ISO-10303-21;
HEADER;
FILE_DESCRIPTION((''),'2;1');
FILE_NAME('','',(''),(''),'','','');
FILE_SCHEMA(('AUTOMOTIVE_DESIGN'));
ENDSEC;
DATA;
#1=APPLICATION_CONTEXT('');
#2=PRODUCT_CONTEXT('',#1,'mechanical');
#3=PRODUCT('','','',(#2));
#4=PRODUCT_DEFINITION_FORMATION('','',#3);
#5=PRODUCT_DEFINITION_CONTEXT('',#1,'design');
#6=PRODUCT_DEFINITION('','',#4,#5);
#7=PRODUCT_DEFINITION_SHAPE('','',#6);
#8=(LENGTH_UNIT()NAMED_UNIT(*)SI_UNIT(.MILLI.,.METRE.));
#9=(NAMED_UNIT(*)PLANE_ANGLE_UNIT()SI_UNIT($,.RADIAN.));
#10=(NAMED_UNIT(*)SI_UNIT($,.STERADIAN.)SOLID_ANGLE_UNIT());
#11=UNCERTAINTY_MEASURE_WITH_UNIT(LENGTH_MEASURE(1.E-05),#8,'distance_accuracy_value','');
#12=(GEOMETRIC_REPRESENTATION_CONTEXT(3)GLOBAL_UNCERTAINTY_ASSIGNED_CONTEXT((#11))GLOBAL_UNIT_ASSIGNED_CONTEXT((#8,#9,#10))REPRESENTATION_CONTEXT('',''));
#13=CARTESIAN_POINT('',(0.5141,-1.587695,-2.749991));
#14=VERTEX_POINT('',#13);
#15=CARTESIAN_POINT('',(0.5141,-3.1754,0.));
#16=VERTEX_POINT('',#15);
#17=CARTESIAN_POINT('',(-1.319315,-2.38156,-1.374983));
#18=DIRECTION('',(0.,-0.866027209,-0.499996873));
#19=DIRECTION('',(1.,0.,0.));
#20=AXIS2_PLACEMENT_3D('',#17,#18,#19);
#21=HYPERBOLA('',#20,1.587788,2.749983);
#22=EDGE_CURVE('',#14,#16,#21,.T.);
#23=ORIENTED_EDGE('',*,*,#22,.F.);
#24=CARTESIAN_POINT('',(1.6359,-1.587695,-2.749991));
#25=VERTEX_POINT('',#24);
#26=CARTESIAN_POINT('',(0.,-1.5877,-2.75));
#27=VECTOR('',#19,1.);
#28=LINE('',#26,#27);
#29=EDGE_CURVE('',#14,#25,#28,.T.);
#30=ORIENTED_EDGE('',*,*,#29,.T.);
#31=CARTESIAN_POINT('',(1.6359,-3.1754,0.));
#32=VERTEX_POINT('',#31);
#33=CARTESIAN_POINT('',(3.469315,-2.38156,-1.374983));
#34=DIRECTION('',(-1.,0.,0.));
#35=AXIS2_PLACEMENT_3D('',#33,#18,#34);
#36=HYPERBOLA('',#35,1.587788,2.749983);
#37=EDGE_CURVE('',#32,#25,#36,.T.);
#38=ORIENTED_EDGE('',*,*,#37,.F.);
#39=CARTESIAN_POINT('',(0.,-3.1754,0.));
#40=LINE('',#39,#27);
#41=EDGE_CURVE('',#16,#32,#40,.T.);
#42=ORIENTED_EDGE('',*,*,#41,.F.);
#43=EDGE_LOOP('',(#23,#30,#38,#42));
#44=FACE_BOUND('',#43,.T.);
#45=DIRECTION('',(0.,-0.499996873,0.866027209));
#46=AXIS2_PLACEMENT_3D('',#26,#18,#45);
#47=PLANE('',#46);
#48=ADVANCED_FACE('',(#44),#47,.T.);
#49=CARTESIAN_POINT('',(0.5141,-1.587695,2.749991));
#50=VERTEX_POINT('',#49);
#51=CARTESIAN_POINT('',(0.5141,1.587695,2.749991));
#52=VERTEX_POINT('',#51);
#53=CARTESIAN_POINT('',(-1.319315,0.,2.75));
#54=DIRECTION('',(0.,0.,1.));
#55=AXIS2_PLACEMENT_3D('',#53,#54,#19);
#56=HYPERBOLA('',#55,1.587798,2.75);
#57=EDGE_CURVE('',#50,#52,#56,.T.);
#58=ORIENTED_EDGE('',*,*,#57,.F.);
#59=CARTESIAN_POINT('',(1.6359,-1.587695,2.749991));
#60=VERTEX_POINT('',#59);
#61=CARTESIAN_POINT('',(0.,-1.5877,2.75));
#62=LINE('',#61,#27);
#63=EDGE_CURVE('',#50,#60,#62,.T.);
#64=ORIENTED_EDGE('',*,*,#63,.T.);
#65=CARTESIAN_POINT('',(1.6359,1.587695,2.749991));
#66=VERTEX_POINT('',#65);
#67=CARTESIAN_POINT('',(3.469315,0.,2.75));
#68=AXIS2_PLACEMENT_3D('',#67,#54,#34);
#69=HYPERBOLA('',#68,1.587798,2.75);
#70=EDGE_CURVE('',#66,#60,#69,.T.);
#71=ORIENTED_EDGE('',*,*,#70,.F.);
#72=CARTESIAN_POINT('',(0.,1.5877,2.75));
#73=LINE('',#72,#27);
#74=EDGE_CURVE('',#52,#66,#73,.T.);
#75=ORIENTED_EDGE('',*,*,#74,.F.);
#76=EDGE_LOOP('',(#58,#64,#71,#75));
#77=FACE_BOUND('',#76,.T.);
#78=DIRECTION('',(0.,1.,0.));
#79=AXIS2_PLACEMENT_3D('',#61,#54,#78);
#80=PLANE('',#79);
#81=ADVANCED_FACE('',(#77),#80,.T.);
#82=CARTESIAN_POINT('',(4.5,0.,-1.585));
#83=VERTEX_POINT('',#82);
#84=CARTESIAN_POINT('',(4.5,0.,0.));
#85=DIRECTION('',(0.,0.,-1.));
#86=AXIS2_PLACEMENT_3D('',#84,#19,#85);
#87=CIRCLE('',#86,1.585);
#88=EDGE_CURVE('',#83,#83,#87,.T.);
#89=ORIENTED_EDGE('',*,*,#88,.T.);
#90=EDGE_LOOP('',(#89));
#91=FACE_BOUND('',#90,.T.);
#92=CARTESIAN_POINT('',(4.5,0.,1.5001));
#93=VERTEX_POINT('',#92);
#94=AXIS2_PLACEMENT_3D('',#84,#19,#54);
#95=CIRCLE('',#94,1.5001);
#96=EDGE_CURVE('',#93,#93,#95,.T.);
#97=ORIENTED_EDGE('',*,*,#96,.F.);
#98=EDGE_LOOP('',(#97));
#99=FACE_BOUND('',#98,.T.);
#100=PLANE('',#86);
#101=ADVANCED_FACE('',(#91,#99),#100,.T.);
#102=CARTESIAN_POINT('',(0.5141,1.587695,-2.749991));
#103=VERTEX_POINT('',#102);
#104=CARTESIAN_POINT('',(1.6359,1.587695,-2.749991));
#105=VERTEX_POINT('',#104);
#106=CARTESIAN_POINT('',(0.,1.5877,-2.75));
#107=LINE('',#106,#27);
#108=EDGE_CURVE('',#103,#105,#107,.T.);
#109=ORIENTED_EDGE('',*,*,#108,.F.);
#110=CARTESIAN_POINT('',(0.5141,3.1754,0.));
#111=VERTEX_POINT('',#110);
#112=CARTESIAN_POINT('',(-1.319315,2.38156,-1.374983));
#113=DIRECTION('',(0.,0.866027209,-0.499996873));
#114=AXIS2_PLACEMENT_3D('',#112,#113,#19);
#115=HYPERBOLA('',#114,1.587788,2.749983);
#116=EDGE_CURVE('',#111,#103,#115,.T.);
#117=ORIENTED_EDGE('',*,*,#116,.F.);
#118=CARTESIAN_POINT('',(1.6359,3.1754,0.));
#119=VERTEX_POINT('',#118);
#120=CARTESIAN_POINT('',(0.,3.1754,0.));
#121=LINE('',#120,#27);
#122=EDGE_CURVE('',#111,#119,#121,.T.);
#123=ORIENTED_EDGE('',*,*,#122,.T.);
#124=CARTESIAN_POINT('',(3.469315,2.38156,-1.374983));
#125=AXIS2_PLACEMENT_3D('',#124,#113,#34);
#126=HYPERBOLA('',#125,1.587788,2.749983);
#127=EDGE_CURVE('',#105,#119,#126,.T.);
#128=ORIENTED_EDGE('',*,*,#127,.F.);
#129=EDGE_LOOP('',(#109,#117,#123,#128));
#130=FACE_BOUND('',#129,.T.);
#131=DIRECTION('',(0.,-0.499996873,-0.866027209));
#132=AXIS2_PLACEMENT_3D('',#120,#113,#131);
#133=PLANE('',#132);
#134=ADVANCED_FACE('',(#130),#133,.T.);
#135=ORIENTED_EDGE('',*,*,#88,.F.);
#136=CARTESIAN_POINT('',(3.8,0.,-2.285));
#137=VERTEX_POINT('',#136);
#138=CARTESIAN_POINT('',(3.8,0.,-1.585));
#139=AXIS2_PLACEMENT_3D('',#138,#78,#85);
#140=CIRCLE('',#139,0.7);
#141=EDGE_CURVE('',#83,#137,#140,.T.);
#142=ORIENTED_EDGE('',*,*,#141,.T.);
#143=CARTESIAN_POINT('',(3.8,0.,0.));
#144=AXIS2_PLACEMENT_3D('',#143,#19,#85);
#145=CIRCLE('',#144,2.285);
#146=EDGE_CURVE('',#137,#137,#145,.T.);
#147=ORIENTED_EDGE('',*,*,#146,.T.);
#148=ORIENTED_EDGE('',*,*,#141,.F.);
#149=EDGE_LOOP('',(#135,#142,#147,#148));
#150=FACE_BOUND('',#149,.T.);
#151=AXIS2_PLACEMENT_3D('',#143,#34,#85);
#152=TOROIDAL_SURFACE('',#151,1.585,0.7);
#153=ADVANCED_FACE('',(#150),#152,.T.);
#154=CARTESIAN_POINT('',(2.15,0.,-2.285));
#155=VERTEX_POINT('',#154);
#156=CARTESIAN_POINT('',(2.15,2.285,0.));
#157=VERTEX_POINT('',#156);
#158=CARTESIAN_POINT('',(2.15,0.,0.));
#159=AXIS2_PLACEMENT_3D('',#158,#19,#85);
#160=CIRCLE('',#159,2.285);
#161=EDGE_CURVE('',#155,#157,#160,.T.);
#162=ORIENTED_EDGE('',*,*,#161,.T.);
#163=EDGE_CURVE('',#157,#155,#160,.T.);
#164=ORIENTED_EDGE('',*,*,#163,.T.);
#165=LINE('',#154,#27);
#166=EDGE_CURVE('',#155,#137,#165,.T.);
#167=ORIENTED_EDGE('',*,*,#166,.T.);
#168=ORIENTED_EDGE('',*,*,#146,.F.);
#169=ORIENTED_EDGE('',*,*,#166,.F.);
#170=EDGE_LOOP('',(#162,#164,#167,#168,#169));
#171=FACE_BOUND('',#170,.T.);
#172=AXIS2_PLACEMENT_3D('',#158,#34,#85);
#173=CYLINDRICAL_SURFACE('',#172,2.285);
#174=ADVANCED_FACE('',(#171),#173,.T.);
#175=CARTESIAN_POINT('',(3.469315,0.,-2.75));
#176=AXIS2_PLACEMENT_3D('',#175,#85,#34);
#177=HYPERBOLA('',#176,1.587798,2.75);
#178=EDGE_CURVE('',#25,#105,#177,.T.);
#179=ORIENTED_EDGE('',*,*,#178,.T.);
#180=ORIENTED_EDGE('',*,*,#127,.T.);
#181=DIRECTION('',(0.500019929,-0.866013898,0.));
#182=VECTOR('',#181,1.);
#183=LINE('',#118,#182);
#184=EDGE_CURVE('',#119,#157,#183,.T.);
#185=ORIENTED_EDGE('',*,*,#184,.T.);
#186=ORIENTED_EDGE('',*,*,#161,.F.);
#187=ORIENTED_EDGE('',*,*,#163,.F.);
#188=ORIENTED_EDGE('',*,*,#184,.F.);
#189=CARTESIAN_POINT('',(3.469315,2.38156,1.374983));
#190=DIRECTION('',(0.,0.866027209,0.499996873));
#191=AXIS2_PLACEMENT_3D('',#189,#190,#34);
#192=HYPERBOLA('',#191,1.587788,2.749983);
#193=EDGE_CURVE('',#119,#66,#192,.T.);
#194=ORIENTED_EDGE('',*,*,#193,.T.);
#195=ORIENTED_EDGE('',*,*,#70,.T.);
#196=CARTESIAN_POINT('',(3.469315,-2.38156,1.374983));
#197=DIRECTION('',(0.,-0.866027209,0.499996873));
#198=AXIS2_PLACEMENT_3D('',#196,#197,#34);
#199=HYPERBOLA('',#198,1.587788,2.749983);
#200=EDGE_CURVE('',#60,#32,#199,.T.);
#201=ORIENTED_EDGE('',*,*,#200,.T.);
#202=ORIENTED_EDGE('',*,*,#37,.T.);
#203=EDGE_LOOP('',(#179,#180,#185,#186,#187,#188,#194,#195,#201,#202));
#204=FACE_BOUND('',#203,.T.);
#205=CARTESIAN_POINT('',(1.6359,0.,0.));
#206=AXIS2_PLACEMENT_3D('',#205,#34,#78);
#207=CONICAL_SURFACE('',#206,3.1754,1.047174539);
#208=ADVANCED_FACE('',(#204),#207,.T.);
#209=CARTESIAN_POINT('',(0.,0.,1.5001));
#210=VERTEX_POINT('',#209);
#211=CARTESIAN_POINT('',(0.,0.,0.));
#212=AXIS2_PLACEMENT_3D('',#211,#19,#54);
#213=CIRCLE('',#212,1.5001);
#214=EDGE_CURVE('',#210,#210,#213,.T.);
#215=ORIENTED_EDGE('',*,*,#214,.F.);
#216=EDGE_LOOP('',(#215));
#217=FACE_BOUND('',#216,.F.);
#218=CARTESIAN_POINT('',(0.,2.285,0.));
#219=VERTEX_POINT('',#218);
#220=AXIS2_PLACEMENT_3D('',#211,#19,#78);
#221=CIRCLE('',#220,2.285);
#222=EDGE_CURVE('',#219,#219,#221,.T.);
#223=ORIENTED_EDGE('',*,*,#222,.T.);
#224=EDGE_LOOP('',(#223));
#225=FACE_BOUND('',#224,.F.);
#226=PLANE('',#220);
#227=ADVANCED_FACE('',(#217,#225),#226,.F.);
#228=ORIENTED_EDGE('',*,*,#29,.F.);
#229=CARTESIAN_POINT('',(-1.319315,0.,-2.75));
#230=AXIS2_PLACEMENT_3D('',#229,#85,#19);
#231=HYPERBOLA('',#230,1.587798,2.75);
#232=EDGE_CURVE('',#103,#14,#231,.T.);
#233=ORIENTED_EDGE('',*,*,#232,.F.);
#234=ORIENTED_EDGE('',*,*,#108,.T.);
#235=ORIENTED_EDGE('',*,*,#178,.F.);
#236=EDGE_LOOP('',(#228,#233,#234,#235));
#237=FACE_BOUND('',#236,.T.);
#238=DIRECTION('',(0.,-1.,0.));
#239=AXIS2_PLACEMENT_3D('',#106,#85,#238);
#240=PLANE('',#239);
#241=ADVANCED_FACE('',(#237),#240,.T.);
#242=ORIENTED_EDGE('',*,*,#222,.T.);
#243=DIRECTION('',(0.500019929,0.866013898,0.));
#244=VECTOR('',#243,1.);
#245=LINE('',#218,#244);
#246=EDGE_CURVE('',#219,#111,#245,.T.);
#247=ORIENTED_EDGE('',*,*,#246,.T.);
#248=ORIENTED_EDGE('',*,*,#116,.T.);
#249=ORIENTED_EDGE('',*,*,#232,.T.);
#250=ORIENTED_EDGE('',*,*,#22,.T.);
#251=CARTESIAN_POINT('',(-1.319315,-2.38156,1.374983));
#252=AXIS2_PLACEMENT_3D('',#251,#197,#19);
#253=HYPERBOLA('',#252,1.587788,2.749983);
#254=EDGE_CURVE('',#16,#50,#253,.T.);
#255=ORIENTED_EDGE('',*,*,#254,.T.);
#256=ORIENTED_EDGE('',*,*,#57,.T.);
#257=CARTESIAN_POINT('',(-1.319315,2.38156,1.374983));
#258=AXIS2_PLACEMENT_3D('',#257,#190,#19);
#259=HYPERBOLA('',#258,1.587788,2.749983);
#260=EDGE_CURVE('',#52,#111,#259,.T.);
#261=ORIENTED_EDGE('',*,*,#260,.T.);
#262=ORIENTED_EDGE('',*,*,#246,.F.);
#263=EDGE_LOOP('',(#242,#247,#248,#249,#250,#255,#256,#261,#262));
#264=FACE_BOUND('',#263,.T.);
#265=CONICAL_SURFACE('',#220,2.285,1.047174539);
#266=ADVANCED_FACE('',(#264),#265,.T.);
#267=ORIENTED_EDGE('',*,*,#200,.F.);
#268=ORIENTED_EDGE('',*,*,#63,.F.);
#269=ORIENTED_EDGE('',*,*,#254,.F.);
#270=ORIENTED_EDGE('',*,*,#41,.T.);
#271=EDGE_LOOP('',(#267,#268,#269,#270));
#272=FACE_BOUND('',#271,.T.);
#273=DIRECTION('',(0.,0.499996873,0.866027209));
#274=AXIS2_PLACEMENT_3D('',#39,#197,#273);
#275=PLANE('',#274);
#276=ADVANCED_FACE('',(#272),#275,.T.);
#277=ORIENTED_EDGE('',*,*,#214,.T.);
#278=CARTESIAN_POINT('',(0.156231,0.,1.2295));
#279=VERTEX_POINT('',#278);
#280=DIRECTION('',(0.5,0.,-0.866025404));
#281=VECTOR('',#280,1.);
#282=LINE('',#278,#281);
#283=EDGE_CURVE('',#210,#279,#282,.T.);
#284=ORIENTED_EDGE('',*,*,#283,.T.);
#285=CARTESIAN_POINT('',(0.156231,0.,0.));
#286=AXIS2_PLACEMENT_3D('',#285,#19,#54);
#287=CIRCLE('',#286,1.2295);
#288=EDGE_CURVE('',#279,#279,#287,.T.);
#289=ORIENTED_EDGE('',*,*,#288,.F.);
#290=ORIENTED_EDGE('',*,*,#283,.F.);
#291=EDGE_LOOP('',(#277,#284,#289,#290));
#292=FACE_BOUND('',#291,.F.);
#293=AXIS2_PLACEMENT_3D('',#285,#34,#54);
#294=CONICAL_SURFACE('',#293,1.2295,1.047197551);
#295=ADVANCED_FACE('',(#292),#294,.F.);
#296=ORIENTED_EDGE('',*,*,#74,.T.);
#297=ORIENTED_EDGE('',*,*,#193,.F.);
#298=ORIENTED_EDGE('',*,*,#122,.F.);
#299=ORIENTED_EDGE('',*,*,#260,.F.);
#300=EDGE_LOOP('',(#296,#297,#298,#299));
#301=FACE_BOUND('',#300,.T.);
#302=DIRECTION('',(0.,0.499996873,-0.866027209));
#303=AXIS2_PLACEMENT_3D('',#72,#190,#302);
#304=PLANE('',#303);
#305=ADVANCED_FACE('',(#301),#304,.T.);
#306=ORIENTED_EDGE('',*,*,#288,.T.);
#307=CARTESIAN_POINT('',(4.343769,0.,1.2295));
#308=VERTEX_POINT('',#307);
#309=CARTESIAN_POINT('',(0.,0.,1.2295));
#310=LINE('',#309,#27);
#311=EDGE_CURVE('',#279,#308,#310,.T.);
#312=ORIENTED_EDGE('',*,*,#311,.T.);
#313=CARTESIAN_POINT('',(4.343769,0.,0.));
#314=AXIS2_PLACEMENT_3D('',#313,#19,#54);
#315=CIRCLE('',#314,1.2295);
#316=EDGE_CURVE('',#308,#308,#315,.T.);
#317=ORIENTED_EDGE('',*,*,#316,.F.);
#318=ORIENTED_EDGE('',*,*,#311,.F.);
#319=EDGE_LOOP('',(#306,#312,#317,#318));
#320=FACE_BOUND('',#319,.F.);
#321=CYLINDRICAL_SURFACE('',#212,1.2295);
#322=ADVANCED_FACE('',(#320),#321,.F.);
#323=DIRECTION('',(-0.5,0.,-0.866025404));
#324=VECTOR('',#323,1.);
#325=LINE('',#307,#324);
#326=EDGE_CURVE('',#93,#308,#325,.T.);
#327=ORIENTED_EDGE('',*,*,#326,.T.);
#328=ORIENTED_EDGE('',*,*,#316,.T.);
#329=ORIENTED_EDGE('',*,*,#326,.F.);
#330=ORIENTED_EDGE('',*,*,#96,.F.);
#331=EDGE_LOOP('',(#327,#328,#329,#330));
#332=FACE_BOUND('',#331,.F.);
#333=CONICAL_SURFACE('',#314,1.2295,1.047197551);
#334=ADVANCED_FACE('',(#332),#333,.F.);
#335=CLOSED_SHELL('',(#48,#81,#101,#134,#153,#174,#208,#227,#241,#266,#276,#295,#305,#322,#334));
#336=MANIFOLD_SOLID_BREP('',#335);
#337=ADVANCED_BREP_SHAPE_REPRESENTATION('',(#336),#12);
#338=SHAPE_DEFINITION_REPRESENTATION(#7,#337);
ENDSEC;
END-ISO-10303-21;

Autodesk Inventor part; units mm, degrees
ref_plane "YZ Plane" through (0, 0, 0) normal (1, 0, 0) x (0, 1, 0)
ref_plane "XZ Plane" through (0, 0, 0) normal (0, 1, 0) x (-1, 0, 0)
sketch "Sketch1" plane through (0, 0, 0) normal (1, 0, 0) x (0, 1, 0)
  line L0 (1.5877, -2.75) -> (-1.5877, -2.75)
  line L1 (-1.5877, -2.75) -> (-3.1754, 0)
  line L2 (-3.1754, 0) -> (-1.5877, 2.75)
  line L3 (-1.5877, 2.75) -> (1.5877, 2.75)
  line L4 (1.5877, 2.75) -> (3.1754, 0)
  line L5 (3.1754, 0) -> (1.5877, -2.75)
  point P0 (0, 0)
  point P1 (0, 0)
  dimension "d0" = 6.3509
extrude "Body" add sketch "Sketch1" along normal blind 2.15
sketch "Sketch2" plane through (2.15, 0, 0) normal (1, 0, 0) x (0, 0, -1)
  circle A0 centre (0, 0) radius 2.285
  dimension "d7" = 4.57
extrude "Ring" add sketch "Sketch2" along normal blind 2.35
sketch "Sketch3" plane through (0, 0, 0) normal (0, 0, 1) x (1, 0, 0)
  line L0 (0, 1.5877) -> (0, 3.1754) projected
  line L1 (0, 3.1754) -> (2.15, 3.1754) projected
  line L2 (2.15, 1.5877) -> (2.15, 3.1754) projected
  line L3 (-0.43, 0) -> (2.58, 0) projected
  line L4 (0, 2.285) -> (0.5141, 3.1754)
  line L5 (1.6359, 3.1754) -> (2.15, 2.285)
  dimension "d3" = 30
  dimension "d4" = 30
  dimension "d5" = 4.57
  dimension "d6" = 4.57
revolve "Chamfer1" cut sketch "Sketch3" angle 360 about axis through (-10, 0, 0) along (1, 0, 0)
sketch "Sketch4" plane through (0, 0, 0) normal (-1, 0, 0) x (0, 0, 1)
  line L0 (0, -4.4456) -> (0, 4.4456) projected
  line L1 (-3.85, 0) -> (3.85, 0) projected
  point P0 (0, 0)
hole "Thread" at (0, 0, 0) direction (1, 0, 0) diameter 2.459 end through all thread size "M3x0.5" designation "M3" class "6H" standard "ISO Metric profile"
chamfer "Chamfer2" distance 0.2706 angle 30 1 edges at (0, 0, -1.2295) measured on face at (0, 1.908, -0.2317)
chamfer "Chamfer3" distance 0.2706 angle 30 1 edges at (4.5, 0, -1.2295) measured on face at (4.5, -0.2804, -1.8991)
ref_plane "Work Plane1" through (9.5307, 0, 0) normal (0, 0, 1) x (-1, 0, 0)
fillet "Fillet1" radius 0.7 1 edges at (4.5, 0, 2.285)
equation "\"d0\" = 1.1547 * SW"
equation "\"d1\" = KOH1"
equation "\"d7\" = SD2"
equation "\"d8\" = KOH - KOH1"
equation "\"d3\" = ANG1"
equation "\"d4\" = ANG2"
equation "\"d5\" = SW0"
equation "\"d6\" = SW01"
equation "\"d10\" = -0.5 * GD1 + 0.5 * NND"
equation "\"d46\" = -0.5 * GD1 + 0.5 * NND"
equation "\"d12\" = -0.5 * GD1 + 0.5 * NND"
equation "\"d47\" = -0.5 * GD1 + 0.5 * NND"
equation "\"ANG1\" = 30deg"
equation "\"ANG2\" = 30deg"
equation "\"NND\" = 3"
equation "\"KOH1\" = 2.15"
equation "\"KOH\" = 4.5"
equation "\"SW\" = 5.5"
equation "\"SW0\" = 4.57"
equation "\"SW01\" = SW0"
equation "\"SD2\" = SW0"
equation "\"GUL\" = 0.541266 * PTC"
equation "\"THREADDIA\" = 3"
equation "\"TOA\" = 30deg"
equation "\"PTC\" = 0.5"
equation "\"E0\" = 1.155 * SW"
equation "\"GAL\" = 0.541266 * PTC"
equation "\"GD1\" = 2.458734"
properties part number "ISO 7040 - M3" material "Steel"
